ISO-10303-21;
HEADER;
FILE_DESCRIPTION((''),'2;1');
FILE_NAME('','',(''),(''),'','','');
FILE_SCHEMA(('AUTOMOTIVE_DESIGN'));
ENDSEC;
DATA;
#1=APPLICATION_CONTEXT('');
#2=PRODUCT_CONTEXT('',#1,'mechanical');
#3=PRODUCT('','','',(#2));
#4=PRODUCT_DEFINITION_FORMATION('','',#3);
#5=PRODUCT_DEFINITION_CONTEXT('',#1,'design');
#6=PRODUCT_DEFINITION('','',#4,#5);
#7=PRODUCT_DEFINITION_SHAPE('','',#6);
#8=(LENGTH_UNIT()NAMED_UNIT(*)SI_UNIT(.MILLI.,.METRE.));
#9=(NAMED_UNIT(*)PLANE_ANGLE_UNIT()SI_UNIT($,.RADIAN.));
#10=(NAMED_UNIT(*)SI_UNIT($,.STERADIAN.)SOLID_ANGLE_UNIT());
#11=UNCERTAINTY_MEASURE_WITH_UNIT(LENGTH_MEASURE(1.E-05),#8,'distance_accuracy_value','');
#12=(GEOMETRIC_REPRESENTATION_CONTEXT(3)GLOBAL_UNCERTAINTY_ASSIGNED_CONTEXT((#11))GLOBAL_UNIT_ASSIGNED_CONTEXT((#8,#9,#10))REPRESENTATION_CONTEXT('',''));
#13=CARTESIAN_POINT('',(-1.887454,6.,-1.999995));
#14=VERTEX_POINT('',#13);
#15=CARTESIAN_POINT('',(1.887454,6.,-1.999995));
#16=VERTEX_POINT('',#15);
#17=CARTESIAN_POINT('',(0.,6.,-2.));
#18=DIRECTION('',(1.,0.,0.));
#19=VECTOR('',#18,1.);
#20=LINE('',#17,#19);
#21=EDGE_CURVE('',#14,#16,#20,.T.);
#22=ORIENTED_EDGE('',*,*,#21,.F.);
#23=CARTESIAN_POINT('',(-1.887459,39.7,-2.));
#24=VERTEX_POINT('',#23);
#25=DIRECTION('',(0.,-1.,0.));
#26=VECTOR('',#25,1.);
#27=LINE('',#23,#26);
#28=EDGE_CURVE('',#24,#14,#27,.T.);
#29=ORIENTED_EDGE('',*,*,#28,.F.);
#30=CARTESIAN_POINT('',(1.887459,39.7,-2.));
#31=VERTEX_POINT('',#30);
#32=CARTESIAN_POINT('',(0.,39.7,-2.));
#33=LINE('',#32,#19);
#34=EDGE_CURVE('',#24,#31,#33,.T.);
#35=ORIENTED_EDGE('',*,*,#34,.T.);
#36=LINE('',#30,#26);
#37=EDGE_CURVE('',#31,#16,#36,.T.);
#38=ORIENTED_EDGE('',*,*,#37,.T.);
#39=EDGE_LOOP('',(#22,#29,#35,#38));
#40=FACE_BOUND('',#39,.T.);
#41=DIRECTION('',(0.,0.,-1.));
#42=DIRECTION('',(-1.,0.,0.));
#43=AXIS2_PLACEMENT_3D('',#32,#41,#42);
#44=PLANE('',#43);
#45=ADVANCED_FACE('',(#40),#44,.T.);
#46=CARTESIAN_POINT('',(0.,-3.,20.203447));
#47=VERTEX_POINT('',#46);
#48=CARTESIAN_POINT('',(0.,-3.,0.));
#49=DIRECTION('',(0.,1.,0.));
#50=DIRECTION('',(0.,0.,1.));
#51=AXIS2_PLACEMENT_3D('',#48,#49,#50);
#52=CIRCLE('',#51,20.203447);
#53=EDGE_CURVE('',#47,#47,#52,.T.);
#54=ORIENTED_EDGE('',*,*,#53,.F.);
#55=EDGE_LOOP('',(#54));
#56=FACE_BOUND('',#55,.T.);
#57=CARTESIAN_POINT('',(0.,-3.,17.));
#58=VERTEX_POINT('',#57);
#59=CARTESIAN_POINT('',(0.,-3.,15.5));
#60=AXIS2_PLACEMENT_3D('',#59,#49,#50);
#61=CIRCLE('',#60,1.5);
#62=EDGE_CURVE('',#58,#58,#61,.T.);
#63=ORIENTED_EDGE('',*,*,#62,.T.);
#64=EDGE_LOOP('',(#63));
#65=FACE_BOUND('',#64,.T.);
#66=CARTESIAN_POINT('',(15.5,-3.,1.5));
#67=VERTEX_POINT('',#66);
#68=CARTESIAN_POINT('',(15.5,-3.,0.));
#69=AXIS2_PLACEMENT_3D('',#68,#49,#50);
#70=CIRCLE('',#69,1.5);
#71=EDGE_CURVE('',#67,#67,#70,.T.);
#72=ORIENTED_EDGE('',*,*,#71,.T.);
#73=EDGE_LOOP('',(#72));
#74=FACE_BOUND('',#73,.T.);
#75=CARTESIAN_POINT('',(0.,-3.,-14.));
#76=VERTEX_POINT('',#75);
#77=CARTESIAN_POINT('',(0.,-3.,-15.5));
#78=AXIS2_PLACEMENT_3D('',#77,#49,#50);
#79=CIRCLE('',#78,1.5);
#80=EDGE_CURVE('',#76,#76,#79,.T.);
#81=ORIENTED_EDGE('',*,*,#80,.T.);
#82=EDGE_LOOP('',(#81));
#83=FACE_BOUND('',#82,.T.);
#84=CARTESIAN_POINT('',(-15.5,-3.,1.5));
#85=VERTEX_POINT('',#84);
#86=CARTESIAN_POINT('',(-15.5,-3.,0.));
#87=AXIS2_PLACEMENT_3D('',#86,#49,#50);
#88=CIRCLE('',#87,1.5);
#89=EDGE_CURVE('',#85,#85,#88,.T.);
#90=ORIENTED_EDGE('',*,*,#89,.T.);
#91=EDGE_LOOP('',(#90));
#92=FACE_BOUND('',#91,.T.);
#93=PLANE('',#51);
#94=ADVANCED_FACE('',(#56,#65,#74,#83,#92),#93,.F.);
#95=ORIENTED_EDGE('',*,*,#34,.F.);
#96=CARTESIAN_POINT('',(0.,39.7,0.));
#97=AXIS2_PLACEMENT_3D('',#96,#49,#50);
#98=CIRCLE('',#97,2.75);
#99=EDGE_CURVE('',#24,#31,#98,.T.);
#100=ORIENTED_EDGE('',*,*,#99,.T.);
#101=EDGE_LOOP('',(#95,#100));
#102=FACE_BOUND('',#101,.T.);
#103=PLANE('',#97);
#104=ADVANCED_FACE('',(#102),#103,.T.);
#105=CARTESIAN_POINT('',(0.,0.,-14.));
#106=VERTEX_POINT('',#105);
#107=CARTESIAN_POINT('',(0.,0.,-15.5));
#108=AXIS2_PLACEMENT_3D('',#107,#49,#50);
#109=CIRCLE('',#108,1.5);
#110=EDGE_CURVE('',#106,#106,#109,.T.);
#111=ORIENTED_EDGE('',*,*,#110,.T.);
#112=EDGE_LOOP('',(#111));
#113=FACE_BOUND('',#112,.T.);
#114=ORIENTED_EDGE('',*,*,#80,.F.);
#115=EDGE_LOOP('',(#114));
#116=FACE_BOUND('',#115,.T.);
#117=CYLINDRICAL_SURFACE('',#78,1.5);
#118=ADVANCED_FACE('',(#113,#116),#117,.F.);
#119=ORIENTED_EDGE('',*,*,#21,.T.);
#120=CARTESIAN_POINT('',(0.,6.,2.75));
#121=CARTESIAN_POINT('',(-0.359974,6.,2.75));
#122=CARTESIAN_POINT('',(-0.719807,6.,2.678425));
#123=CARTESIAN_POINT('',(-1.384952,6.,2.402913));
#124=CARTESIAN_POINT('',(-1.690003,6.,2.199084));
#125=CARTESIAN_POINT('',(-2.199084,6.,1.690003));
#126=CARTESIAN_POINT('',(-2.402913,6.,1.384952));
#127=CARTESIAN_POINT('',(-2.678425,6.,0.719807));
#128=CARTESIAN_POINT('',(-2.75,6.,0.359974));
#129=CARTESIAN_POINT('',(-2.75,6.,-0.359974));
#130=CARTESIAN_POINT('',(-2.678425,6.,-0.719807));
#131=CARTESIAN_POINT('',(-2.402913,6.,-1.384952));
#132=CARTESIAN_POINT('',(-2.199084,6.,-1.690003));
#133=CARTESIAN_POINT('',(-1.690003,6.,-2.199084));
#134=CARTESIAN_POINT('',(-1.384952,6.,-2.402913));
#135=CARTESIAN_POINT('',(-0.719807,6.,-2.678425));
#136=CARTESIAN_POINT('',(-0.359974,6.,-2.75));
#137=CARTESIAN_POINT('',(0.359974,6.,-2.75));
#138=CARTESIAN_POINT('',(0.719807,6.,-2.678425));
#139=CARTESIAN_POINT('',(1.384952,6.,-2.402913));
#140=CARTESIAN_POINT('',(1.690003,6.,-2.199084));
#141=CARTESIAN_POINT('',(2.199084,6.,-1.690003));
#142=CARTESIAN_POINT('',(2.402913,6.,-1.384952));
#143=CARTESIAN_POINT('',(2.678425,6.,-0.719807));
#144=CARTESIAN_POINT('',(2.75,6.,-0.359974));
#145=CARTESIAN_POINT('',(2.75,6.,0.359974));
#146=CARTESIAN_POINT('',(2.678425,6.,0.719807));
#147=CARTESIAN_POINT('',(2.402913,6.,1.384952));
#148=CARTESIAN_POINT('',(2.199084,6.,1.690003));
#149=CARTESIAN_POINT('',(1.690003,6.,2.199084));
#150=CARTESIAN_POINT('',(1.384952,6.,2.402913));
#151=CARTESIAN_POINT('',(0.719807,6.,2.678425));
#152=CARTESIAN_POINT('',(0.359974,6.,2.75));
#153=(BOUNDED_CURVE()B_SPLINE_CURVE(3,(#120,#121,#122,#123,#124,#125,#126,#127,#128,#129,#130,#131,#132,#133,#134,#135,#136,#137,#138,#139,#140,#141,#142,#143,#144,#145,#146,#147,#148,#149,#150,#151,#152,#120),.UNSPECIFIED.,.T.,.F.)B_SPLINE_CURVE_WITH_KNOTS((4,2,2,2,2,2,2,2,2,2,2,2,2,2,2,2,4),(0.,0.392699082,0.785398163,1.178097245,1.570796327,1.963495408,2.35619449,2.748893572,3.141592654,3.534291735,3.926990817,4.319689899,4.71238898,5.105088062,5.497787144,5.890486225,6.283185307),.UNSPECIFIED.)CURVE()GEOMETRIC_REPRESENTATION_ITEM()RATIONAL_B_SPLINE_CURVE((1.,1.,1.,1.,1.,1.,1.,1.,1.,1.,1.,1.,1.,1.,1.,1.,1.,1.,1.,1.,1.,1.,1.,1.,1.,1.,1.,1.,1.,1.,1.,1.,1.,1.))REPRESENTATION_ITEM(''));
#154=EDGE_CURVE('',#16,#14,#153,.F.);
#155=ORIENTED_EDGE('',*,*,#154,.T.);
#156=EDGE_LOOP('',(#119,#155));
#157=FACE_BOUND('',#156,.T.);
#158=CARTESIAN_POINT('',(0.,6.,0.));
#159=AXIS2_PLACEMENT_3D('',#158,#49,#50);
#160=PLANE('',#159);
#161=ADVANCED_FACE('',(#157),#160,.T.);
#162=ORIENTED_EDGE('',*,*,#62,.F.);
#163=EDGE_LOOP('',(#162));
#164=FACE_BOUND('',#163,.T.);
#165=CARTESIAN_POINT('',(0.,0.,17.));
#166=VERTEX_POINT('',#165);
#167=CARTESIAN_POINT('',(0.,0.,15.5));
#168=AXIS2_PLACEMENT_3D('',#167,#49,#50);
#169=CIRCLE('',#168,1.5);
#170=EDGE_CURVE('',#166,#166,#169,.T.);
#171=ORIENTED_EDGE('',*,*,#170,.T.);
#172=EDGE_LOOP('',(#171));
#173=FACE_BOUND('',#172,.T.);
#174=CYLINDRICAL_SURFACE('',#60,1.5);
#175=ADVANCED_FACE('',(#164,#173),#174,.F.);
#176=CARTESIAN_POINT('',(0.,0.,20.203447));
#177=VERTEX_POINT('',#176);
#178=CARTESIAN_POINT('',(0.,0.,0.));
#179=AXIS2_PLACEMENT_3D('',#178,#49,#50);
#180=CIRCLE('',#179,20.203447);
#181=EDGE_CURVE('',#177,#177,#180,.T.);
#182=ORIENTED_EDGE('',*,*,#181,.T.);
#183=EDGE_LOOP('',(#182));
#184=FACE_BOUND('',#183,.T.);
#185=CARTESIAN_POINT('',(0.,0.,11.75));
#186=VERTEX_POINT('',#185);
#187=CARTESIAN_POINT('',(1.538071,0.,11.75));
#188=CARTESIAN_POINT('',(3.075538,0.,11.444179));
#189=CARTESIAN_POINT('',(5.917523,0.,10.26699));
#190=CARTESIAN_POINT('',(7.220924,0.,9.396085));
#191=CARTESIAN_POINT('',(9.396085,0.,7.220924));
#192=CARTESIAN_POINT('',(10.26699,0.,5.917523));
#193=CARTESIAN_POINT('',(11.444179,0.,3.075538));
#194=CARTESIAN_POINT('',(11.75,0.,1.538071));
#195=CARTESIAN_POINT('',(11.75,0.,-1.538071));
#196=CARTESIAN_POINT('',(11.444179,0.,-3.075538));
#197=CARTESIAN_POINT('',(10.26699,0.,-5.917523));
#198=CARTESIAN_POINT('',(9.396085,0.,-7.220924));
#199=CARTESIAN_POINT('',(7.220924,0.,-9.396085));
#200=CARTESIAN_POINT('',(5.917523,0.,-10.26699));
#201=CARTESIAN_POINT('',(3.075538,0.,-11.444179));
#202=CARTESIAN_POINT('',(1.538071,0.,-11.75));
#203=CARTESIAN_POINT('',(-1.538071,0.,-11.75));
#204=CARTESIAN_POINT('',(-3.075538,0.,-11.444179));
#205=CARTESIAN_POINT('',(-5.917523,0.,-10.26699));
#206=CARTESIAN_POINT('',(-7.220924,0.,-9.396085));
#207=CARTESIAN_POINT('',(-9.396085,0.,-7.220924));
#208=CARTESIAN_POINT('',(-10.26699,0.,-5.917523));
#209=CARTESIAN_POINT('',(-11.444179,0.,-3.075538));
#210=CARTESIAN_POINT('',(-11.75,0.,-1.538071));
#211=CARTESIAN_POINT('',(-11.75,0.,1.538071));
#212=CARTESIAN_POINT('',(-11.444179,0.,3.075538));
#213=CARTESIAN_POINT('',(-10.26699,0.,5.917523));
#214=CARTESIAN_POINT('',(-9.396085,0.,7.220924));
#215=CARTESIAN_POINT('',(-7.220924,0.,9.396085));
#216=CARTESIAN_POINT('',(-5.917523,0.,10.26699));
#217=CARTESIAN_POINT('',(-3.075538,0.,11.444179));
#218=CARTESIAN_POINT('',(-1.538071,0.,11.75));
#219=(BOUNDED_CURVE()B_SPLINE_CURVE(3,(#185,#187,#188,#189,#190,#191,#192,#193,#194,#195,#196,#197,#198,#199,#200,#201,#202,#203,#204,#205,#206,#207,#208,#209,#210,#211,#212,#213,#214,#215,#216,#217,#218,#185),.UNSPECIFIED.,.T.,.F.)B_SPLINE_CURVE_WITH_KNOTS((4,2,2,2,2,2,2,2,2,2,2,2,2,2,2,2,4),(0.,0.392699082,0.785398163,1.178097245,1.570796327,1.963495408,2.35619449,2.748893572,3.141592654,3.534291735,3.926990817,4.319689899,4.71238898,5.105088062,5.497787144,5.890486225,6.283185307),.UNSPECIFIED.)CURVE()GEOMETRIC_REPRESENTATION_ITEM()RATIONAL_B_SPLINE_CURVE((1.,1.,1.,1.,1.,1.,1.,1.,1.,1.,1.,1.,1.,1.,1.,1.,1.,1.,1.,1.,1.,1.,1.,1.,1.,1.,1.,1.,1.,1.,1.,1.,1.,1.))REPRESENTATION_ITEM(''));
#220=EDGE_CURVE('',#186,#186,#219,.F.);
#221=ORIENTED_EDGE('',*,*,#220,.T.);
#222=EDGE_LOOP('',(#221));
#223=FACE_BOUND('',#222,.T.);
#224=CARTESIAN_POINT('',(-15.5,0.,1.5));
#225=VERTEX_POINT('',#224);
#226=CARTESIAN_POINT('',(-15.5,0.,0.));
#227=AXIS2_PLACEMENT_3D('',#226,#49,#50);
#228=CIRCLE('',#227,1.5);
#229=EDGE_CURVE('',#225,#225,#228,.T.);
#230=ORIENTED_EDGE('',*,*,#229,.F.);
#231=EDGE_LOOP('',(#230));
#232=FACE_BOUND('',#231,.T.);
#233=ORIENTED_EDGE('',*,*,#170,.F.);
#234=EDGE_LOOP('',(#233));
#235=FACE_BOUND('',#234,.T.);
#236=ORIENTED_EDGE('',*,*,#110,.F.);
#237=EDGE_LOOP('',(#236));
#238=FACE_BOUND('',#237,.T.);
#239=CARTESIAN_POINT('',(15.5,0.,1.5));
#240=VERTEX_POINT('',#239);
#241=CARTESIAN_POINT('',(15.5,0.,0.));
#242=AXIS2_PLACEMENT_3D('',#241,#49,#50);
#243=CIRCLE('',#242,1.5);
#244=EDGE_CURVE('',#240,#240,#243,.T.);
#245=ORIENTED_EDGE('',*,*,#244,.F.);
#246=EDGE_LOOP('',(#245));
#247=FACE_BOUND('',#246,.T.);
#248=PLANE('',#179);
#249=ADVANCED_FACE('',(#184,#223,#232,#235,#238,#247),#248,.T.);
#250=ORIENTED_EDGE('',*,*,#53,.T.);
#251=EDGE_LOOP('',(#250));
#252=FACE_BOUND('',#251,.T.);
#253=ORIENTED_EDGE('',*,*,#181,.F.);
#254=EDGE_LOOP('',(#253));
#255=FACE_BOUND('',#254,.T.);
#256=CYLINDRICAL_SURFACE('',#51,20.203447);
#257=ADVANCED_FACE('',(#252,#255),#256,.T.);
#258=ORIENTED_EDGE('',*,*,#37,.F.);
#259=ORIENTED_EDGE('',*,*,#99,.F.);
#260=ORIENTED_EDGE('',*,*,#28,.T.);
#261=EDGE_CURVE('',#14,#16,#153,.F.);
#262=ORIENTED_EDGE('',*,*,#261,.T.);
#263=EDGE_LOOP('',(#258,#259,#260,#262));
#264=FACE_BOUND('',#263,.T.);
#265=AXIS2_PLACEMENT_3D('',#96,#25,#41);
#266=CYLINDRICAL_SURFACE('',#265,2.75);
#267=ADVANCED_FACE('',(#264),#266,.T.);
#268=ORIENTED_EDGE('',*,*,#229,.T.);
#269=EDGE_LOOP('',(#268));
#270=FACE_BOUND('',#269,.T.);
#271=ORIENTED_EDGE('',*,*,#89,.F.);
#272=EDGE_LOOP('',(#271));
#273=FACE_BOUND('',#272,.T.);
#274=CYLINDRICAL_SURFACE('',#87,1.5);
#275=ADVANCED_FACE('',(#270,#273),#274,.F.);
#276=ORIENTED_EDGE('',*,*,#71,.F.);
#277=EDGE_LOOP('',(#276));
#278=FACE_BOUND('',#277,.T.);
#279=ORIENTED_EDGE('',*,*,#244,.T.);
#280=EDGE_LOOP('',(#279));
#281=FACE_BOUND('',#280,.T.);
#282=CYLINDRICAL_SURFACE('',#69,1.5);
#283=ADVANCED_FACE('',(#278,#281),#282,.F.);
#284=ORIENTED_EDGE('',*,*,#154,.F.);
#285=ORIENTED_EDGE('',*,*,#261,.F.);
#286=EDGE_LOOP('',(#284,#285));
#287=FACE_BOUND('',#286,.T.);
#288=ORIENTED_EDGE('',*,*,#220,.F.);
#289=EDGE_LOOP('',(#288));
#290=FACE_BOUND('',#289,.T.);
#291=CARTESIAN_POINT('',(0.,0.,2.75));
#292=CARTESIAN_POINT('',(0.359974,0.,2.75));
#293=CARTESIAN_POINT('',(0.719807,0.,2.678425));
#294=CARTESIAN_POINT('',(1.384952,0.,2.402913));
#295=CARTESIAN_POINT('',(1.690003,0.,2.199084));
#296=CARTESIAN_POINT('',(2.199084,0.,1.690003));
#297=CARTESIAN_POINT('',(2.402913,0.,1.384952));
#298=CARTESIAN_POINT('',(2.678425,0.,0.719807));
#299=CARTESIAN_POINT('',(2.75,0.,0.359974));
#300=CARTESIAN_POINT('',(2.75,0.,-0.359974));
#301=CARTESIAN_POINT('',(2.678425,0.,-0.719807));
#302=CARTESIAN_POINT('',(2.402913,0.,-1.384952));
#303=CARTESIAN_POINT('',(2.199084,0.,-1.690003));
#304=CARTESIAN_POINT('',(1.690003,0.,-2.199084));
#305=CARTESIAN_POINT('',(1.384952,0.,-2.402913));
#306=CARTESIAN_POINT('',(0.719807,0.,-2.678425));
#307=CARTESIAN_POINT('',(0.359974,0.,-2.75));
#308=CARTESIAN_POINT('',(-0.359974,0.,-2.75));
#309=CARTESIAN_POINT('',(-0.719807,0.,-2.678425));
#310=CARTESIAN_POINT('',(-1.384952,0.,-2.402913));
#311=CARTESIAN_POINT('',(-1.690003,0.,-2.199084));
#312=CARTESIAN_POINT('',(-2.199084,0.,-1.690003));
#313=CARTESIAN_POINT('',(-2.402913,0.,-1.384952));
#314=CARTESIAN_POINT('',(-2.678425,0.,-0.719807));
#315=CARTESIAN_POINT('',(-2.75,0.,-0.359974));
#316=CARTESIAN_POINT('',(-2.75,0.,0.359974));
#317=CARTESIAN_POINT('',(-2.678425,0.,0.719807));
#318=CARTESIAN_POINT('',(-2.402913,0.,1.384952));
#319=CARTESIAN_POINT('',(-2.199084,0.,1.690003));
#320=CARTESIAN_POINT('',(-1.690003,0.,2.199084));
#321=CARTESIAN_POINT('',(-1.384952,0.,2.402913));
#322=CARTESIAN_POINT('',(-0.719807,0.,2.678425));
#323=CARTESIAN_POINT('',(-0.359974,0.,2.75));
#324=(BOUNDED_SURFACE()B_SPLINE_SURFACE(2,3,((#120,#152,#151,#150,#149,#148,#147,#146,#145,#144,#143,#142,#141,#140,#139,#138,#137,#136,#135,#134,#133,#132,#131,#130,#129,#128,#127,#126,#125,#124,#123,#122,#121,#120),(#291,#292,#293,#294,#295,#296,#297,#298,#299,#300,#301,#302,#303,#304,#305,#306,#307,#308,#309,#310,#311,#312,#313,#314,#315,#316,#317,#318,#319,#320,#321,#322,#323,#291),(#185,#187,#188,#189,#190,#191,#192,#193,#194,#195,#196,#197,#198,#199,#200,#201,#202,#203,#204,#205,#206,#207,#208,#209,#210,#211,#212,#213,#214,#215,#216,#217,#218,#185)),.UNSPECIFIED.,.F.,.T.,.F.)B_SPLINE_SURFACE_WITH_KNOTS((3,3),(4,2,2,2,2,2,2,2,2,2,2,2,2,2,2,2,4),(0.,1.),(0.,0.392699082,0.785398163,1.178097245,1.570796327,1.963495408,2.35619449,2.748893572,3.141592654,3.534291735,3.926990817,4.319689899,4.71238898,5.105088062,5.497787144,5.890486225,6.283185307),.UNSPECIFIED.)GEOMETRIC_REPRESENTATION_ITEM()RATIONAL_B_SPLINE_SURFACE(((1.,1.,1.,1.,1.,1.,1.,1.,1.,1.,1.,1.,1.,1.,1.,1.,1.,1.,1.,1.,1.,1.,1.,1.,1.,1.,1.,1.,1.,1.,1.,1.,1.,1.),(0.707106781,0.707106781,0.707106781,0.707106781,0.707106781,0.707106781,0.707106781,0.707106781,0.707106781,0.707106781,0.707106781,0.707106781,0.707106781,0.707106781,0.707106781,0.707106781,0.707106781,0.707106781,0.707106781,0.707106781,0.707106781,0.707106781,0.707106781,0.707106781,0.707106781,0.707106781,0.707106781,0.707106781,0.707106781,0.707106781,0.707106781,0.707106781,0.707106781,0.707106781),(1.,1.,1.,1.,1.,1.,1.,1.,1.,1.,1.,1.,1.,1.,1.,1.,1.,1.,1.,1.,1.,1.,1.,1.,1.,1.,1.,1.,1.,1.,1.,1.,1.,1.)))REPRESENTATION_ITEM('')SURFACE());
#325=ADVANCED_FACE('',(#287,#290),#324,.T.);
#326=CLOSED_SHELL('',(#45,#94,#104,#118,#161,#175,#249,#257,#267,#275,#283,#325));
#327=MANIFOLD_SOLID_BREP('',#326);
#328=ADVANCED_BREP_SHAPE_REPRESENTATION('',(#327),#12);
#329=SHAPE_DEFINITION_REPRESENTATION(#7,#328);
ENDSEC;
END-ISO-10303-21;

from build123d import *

# Parameters (mm, degrees)
SKETCH2_R           = 20.203446649
SKETCH2_R_2         = 1.5
SKETCH2_R_3         = 2.75
BOSS_EXTRUDE1_DEPTH = 3
BOSS_EXTRUDE2_DEPTH = 39.7
BOSS_EXTRUDE3_DEPTH = 6
FILLET1_SIZE        = 9
FILLET1_SIZE_2      = 6


with BuildPart() as part:
    # Sketch2 → Boss-Extrude1 (new body)
    # profile 1 of 5: a face of its own
    with BuildSketch(Plane(origin=(0, 0, 0), x_dir=(1, 0, 0), z_dir=(0, 1, 0))):
        with Locations(Location((0, 0, 0), (0, 0, 270))):
            Circle(SKETCH2_R)
        with Locations(Location((0, 15.5, 0), (0, 0, 270))):
            Circle(SKETCH2_R_2, mode=Mode.SUBTRACT)
        with Locations(Location((-15.5, 0, 0), (0, 0, 270))):
            Circle(SKETCH2_R_2, mode=Mode.SUBTRACT)
        with Locations(Location((0, -15.5, 0), (0, 0, 270))):
            Circle(SKETCH2_R_2, mode=Mode.SUBTRACT)
        with Locations(Location((15.5, 0, 0), (0, 0, 270))):
            Circle(SKETCH2_R_2, mode=Mode.SUBTRACT)
        Circle(SKETCH2_R_3, mode=Mode.SUBTRACT)
    # profile 2 of 5: a face of its own
    with BuildSketch(Plane(origin=(0, 0, 0), x_dir=(1, 0, 0), z_dir=(0, 1, 0))):
        with BuildLine():
            ThreePointArc((1.887458609, 2), (0, 2.75), (-1.887458609, 2))
            Line((-1.887458609, 2), (1.887458609, 2))
        make_face()
    # profile 3 of 5: a face of its own
    with BuildSketch(Plane(origin=(0, 0, 0), x_dir=(1, 0, 0), z_dir=(0, 1, 0))):
        with BuildLine():
            Line((1.887458609, 2), (-1.887458609, 2))
            ThreePointArc((-1.887458609, 2), (-1.089033706, -2.525174368), (2.75, 0))
            ThreePointArc((2.75, 0), (2.525174368, 1.089033706), (1.887458609, 2))
        make_face()
    # profile 4 of 5: a face of its own
    with BuildSketch(Plane(origin=(0, 0, 0), x_dir=(1, 0, 0), z_dir=(0, 1, 0))):
        with BuildLine():
            ThreePointArc((1.887458609, 2), (0, 2.75), (-1.887458609, 2))
            Line((-1.887458609, 2), (1.887458609, 2))
        make_face()
    # profile 5 of 5: a face of its own
    with BuildSketch(Plane(origin=(0, 0, 0), x_dir=(1, 0, 0), z_dir=(0, 1, 0))):
        with BuildLine():
            Line((1.887458609, 2), (-1.887458609, 2))
            ThreePointArc((-1.887458609, 2), (-1.089033706, -2.525174368), (2.75, 0))
            ThreePointArc((2.75, 0), (2.525174368, 1.089033706), (1.887458609, 2))
        make_face()
    extrude(amount=-BOSS_EXTRUDE1_DEPTH)

    # Sketch2<3> → Boss-Extrude2 (add)
    with BuildSketch(Plane(origin=(0, 0, 0), x_dir=(1, 0, 0), z_dir=(0, 1, 0))):
        with BuildLine():
            Line((1.887458609, 2), (-1.887458609, 2))
            ThreePointArc((-1.887458609, 2), (-1.089033706, -2.525174368), (2.75, 0))
            ThreePointArc((2.75, 0), (2.525174368, 1.089033706), (1.887458609, 2))
        make_face()
    extrude(amount=BOSS_EXTRUDE2_DEPTH)

    # Sketch2<4> → Boss-Extrude3 (add)
    with BuildSketch(Plane(origin=(0, 0, 0), x_dir=(1, 0, 0), z_dir=(0, 1, 0))):
        with BuildLine():
            ThreePointArc((1.887458609, 2), (0, 2.75), (-1.887458609, 2))
            Line((-1.887458609, 2), (1.887458609, 2))
        make_face()
        with BuildLine():
            Line((1.887458609, 2), (-1.887458609, 2))
            ThreePointArc((-1.887458609, 2), (-1.089033706, -2.525174368), (2.75, 0))
            ThreePointArc((2.75, 0), (2.525174368, 1.089033706), (1.887458609, 2))
        make_face()
    extrude(amount=BOSS_EXTRUDE3_DEPTH)

    # Fillet1
    # an asymmetric fillet: 9, 6 mm, written as the material it adds along each edge
    with BuildSketch(Plane(origin=(0, 0, 0), x_dir=(0.6863485850246134, 0, -0.7272727272727275), z_dir=(-0.7272727272727275, 0, -0.6863485850246134))) as fillet1_piece_1_section:
        with BuildLine():
            Bezier((2.75 + FILLET1_SIZE, 0), (2.75, 0), (2.75, -FILLET1_SIZE_2), weights=[1, 0.707106781, 1])
            Line((2.75, -FILLET1_SIZE_2), (2.75, 0))
            Line((2.75, 0), (2.75 + FILLET1_SIZE, 0))
        make_face()
    fillet1_piece_1 = revolve(axis=Axis((0, 0, 0), (0, -1, 0)), mode=Mode.PRIVATE)
    fillet1_piece_1 = split(fillet1_piece_1, bisect_by=Plane(origin=(2.77e-07, 0.848868766, -2), z_dir=(0, 0, -1)), keep=Keep.TOP, mode=Mode.PRIVATE)
    add(fillet1_piece_1)
    with BuildSketch(Plane(origin=(0, 0, 0), x_dir=(0.6863485850246134, 0, -0.7272727272727275), z_dir=(-0.7272727272727275, 0, -0.6863485850246134))) as fillet1_piece_2_section:
        with BuildLine():
            Bezier((2.75 + FILLET1_SIZE, 0), (2.75, 0), (2.75, -FILLET1_SIZE_2), weights=[1, 0.707106781, 1])
            Line((2.75, -FILLET1_SIZE_2), (2.75, 0))
            Line((2.75, 0), (2.75 + FILLET1_SIZE, 0))
        make_face()
    fillet1_piece_2 = revolve(axis=Axis((0, 0, 0), (0, -1, 0)), mode=Mode.PRIVATE)
    fillet1_piece_2 = split(fillet1_piece_2, bisect_by=Plane(origin=(-3.3e-08, 1.056267752, -2), z_dir=(0, 0, 1)), keep=Keep.TOP, mode=Mode.PRIVATE)
    add(fillet1_piece_2)


solid = part.part
